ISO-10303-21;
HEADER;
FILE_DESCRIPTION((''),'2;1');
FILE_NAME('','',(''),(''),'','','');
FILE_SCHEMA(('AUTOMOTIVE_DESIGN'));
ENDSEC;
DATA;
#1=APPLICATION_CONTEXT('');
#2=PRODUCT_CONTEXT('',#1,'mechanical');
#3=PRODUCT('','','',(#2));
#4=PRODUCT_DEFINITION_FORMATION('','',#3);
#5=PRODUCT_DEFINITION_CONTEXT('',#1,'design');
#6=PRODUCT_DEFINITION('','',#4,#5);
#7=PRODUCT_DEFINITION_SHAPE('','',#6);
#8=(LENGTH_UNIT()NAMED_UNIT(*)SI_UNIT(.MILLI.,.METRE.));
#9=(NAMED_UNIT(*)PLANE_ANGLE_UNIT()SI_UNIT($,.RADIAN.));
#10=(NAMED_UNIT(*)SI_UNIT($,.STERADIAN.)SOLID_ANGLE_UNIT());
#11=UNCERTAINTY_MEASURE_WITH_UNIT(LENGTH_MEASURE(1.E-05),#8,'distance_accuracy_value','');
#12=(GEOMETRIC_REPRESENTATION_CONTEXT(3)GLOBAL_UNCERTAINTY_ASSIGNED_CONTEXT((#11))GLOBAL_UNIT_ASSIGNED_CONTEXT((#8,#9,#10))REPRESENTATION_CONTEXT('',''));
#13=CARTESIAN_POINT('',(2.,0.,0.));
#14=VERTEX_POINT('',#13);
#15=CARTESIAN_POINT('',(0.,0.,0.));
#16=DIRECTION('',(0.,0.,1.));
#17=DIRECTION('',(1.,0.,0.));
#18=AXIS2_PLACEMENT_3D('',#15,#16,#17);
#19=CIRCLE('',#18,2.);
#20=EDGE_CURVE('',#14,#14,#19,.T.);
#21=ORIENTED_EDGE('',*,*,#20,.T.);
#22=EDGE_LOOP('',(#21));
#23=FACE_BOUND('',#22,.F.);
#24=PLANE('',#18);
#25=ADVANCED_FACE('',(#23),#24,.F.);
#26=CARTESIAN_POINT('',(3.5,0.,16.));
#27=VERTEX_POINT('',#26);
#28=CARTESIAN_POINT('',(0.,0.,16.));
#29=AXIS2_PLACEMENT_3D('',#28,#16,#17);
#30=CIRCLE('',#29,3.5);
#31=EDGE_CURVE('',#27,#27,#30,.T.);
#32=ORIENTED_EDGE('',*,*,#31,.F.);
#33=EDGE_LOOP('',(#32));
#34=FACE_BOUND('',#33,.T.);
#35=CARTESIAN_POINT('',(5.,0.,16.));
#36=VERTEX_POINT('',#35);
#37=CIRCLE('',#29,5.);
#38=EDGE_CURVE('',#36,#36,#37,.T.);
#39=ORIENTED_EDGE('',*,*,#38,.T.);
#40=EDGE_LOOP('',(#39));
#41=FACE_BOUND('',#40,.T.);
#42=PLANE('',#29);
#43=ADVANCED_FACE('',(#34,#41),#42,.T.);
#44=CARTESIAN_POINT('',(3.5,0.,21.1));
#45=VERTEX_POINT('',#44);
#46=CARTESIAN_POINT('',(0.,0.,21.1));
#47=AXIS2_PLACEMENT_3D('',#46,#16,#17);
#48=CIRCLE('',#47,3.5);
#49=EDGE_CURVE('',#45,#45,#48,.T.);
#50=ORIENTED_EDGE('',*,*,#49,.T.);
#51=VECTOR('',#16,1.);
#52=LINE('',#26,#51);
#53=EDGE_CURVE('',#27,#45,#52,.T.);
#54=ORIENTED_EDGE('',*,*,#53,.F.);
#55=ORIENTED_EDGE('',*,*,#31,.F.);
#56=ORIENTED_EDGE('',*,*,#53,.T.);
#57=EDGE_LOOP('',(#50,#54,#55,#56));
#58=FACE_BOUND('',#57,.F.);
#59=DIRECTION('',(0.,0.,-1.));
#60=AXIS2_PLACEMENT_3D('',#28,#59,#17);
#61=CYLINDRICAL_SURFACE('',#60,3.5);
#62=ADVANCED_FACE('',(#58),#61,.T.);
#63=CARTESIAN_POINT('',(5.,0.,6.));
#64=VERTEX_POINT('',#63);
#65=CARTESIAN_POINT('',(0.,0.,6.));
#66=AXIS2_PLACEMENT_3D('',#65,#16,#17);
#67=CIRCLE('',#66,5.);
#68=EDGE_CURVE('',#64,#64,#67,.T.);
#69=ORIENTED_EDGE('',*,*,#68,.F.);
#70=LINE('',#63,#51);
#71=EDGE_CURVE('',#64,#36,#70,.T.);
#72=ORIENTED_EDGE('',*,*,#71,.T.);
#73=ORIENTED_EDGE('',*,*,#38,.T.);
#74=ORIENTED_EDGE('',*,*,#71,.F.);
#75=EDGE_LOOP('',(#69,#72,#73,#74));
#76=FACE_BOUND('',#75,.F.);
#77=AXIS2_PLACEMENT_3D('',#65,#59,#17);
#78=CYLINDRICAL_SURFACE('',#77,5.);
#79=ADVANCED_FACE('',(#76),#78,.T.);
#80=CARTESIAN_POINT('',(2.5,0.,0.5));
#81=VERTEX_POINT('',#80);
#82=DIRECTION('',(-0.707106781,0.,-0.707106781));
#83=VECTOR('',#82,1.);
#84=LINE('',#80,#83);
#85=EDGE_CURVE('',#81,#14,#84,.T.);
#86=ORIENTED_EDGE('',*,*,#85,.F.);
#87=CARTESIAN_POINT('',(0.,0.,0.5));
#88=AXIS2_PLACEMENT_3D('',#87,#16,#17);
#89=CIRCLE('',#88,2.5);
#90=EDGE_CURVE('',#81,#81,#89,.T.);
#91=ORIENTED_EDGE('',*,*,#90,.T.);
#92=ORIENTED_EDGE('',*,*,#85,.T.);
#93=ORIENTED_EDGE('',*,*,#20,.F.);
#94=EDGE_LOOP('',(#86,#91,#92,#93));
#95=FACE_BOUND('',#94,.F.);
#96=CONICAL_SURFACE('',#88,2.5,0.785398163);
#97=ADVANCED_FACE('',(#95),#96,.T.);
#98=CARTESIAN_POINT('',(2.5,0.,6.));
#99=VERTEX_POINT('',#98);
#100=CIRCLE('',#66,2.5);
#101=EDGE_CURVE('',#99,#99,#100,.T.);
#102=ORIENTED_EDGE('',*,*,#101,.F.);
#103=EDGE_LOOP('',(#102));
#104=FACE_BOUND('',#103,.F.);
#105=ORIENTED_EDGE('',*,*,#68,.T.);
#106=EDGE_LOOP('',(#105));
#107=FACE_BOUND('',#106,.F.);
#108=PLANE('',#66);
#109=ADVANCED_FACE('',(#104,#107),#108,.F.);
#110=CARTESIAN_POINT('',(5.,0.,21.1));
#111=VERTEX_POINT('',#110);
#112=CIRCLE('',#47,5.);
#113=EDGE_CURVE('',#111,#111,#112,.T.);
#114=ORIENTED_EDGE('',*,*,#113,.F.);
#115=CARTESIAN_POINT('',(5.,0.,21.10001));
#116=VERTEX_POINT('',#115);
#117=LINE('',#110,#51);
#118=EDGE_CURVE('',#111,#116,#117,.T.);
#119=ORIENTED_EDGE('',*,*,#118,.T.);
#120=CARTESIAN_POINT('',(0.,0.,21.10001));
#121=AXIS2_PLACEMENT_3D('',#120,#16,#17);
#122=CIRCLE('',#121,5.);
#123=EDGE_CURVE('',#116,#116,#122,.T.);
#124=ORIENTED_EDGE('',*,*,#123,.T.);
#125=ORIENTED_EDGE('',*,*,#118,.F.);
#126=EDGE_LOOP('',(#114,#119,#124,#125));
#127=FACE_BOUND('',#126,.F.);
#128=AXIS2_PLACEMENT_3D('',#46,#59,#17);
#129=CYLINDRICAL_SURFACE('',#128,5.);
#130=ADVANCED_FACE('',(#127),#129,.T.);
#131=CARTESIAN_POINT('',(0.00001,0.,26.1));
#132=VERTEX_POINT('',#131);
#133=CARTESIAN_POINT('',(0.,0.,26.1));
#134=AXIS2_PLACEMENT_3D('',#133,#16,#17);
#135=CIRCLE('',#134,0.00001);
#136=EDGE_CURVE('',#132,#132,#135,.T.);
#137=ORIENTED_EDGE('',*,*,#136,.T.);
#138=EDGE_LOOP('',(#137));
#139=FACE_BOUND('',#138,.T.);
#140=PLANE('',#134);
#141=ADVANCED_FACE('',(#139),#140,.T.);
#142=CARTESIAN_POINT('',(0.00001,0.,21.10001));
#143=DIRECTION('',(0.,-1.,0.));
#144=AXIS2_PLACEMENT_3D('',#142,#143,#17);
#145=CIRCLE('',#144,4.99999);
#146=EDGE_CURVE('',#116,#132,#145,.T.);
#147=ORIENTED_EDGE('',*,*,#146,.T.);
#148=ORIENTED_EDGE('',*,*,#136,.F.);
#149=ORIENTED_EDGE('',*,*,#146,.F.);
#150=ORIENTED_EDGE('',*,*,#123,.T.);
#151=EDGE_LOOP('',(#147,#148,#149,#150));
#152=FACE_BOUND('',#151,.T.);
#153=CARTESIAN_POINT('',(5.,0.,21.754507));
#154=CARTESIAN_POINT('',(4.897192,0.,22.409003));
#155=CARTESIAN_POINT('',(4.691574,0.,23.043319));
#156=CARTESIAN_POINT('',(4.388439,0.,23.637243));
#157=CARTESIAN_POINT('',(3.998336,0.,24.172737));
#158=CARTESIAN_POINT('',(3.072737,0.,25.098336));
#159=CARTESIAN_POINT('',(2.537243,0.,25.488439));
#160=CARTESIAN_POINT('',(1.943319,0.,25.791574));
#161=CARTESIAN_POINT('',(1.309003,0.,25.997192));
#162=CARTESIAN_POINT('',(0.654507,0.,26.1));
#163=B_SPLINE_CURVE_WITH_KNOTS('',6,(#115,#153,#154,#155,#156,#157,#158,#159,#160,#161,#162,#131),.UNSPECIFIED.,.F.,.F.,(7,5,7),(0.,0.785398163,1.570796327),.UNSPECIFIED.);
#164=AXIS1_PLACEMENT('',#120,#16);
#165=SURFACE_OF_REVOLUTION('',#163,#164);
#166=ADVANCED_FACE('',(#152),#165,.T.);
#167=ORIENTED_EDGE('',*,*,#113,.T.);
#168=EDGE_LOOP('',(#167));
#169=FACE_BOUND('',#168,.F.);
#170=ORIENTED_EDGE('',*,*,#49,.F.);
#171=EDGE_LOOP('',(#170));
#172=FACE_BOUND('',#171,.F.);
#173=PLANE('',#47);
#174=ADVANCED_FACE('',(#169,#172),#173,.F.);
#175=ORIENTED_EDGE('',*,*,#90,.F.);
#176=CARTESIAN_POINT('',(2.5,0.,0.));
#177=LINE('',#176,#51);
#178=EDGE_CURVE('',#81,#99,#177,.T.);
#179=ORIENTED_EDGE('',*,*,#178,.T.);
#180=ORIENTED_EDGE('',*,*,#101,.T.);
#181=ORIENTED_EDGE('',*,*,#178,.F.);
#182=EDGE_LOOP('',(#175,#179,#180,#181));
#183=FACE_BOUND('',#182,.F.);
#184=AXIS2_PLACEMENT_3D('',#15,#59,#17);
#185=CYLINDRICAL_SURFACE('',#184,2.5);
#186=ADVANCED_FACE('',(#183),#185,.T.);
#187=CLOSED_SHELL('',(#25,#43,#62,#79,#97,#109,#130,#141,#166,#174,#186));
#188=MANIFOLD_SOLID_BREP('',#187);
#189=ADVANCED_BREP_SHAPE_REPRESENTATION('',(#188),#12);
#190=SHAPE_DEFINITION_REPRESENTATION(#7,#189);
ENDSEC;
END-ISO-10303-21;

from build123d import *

# Parameters (mm, degrees)
F0_R     = 2.5
F1_DEPTH = 6
F2_R     = 5
F3_DEPTH = 10
F4_R     = 3.5
F5_DEPTH = 5.1
F6_R     = 5
F7_DEPTH = 5
F8_SIZE  = 0.5
F9_R     = 4.99999


# Not quite as in the source:
# - a fillet or chamfer is up to 0.001 mm smaller than in the source, because OpenCascade refuses the exact size


with BuildPart() as f1:
    # F0 (on Top) → F1 (new body)
    with BuildSketch(Plane.XY):
        Circle(F0_R)
    extrude(amount=F1_DEPTH)

    # F2 (on face) → F3 (join)
    with BuildSketch(Plane.XY.offset(6)):
        Circle(F2_R)
    extrude(amount=F3_DEPTH)

    # F4 (on face) → F5 (join)
    with BuildSketch(Plane.XY.offset(16)):
        Circle(F4_R)
    extrude(amount=F5_DEPTH)

    # F6 (on face) → F7 (join)
    with BuildSketch(Plane.XY.offset(21.1)):
        Circle(F6_R)
    extrude(amount=F7_DEPTH)

    # F8
    f8_edges = [f1.edges().sort_by_distance(p)[0] for p in [
        (-2.5, 0, 0),
    ]]
    chamfer(f8_edges, length=F8_SIZE)

    # F9 (radius 5 in the source; OpenCascade refuses exactly that, so slightly less here)
    f9_edges = [f1.edges().sort_by_distance(p)[0] for p in [
        (-5, 0, 26.1),
    ]]
    fillet(f9_edges, radius=F9_R)


solid = f1.part
